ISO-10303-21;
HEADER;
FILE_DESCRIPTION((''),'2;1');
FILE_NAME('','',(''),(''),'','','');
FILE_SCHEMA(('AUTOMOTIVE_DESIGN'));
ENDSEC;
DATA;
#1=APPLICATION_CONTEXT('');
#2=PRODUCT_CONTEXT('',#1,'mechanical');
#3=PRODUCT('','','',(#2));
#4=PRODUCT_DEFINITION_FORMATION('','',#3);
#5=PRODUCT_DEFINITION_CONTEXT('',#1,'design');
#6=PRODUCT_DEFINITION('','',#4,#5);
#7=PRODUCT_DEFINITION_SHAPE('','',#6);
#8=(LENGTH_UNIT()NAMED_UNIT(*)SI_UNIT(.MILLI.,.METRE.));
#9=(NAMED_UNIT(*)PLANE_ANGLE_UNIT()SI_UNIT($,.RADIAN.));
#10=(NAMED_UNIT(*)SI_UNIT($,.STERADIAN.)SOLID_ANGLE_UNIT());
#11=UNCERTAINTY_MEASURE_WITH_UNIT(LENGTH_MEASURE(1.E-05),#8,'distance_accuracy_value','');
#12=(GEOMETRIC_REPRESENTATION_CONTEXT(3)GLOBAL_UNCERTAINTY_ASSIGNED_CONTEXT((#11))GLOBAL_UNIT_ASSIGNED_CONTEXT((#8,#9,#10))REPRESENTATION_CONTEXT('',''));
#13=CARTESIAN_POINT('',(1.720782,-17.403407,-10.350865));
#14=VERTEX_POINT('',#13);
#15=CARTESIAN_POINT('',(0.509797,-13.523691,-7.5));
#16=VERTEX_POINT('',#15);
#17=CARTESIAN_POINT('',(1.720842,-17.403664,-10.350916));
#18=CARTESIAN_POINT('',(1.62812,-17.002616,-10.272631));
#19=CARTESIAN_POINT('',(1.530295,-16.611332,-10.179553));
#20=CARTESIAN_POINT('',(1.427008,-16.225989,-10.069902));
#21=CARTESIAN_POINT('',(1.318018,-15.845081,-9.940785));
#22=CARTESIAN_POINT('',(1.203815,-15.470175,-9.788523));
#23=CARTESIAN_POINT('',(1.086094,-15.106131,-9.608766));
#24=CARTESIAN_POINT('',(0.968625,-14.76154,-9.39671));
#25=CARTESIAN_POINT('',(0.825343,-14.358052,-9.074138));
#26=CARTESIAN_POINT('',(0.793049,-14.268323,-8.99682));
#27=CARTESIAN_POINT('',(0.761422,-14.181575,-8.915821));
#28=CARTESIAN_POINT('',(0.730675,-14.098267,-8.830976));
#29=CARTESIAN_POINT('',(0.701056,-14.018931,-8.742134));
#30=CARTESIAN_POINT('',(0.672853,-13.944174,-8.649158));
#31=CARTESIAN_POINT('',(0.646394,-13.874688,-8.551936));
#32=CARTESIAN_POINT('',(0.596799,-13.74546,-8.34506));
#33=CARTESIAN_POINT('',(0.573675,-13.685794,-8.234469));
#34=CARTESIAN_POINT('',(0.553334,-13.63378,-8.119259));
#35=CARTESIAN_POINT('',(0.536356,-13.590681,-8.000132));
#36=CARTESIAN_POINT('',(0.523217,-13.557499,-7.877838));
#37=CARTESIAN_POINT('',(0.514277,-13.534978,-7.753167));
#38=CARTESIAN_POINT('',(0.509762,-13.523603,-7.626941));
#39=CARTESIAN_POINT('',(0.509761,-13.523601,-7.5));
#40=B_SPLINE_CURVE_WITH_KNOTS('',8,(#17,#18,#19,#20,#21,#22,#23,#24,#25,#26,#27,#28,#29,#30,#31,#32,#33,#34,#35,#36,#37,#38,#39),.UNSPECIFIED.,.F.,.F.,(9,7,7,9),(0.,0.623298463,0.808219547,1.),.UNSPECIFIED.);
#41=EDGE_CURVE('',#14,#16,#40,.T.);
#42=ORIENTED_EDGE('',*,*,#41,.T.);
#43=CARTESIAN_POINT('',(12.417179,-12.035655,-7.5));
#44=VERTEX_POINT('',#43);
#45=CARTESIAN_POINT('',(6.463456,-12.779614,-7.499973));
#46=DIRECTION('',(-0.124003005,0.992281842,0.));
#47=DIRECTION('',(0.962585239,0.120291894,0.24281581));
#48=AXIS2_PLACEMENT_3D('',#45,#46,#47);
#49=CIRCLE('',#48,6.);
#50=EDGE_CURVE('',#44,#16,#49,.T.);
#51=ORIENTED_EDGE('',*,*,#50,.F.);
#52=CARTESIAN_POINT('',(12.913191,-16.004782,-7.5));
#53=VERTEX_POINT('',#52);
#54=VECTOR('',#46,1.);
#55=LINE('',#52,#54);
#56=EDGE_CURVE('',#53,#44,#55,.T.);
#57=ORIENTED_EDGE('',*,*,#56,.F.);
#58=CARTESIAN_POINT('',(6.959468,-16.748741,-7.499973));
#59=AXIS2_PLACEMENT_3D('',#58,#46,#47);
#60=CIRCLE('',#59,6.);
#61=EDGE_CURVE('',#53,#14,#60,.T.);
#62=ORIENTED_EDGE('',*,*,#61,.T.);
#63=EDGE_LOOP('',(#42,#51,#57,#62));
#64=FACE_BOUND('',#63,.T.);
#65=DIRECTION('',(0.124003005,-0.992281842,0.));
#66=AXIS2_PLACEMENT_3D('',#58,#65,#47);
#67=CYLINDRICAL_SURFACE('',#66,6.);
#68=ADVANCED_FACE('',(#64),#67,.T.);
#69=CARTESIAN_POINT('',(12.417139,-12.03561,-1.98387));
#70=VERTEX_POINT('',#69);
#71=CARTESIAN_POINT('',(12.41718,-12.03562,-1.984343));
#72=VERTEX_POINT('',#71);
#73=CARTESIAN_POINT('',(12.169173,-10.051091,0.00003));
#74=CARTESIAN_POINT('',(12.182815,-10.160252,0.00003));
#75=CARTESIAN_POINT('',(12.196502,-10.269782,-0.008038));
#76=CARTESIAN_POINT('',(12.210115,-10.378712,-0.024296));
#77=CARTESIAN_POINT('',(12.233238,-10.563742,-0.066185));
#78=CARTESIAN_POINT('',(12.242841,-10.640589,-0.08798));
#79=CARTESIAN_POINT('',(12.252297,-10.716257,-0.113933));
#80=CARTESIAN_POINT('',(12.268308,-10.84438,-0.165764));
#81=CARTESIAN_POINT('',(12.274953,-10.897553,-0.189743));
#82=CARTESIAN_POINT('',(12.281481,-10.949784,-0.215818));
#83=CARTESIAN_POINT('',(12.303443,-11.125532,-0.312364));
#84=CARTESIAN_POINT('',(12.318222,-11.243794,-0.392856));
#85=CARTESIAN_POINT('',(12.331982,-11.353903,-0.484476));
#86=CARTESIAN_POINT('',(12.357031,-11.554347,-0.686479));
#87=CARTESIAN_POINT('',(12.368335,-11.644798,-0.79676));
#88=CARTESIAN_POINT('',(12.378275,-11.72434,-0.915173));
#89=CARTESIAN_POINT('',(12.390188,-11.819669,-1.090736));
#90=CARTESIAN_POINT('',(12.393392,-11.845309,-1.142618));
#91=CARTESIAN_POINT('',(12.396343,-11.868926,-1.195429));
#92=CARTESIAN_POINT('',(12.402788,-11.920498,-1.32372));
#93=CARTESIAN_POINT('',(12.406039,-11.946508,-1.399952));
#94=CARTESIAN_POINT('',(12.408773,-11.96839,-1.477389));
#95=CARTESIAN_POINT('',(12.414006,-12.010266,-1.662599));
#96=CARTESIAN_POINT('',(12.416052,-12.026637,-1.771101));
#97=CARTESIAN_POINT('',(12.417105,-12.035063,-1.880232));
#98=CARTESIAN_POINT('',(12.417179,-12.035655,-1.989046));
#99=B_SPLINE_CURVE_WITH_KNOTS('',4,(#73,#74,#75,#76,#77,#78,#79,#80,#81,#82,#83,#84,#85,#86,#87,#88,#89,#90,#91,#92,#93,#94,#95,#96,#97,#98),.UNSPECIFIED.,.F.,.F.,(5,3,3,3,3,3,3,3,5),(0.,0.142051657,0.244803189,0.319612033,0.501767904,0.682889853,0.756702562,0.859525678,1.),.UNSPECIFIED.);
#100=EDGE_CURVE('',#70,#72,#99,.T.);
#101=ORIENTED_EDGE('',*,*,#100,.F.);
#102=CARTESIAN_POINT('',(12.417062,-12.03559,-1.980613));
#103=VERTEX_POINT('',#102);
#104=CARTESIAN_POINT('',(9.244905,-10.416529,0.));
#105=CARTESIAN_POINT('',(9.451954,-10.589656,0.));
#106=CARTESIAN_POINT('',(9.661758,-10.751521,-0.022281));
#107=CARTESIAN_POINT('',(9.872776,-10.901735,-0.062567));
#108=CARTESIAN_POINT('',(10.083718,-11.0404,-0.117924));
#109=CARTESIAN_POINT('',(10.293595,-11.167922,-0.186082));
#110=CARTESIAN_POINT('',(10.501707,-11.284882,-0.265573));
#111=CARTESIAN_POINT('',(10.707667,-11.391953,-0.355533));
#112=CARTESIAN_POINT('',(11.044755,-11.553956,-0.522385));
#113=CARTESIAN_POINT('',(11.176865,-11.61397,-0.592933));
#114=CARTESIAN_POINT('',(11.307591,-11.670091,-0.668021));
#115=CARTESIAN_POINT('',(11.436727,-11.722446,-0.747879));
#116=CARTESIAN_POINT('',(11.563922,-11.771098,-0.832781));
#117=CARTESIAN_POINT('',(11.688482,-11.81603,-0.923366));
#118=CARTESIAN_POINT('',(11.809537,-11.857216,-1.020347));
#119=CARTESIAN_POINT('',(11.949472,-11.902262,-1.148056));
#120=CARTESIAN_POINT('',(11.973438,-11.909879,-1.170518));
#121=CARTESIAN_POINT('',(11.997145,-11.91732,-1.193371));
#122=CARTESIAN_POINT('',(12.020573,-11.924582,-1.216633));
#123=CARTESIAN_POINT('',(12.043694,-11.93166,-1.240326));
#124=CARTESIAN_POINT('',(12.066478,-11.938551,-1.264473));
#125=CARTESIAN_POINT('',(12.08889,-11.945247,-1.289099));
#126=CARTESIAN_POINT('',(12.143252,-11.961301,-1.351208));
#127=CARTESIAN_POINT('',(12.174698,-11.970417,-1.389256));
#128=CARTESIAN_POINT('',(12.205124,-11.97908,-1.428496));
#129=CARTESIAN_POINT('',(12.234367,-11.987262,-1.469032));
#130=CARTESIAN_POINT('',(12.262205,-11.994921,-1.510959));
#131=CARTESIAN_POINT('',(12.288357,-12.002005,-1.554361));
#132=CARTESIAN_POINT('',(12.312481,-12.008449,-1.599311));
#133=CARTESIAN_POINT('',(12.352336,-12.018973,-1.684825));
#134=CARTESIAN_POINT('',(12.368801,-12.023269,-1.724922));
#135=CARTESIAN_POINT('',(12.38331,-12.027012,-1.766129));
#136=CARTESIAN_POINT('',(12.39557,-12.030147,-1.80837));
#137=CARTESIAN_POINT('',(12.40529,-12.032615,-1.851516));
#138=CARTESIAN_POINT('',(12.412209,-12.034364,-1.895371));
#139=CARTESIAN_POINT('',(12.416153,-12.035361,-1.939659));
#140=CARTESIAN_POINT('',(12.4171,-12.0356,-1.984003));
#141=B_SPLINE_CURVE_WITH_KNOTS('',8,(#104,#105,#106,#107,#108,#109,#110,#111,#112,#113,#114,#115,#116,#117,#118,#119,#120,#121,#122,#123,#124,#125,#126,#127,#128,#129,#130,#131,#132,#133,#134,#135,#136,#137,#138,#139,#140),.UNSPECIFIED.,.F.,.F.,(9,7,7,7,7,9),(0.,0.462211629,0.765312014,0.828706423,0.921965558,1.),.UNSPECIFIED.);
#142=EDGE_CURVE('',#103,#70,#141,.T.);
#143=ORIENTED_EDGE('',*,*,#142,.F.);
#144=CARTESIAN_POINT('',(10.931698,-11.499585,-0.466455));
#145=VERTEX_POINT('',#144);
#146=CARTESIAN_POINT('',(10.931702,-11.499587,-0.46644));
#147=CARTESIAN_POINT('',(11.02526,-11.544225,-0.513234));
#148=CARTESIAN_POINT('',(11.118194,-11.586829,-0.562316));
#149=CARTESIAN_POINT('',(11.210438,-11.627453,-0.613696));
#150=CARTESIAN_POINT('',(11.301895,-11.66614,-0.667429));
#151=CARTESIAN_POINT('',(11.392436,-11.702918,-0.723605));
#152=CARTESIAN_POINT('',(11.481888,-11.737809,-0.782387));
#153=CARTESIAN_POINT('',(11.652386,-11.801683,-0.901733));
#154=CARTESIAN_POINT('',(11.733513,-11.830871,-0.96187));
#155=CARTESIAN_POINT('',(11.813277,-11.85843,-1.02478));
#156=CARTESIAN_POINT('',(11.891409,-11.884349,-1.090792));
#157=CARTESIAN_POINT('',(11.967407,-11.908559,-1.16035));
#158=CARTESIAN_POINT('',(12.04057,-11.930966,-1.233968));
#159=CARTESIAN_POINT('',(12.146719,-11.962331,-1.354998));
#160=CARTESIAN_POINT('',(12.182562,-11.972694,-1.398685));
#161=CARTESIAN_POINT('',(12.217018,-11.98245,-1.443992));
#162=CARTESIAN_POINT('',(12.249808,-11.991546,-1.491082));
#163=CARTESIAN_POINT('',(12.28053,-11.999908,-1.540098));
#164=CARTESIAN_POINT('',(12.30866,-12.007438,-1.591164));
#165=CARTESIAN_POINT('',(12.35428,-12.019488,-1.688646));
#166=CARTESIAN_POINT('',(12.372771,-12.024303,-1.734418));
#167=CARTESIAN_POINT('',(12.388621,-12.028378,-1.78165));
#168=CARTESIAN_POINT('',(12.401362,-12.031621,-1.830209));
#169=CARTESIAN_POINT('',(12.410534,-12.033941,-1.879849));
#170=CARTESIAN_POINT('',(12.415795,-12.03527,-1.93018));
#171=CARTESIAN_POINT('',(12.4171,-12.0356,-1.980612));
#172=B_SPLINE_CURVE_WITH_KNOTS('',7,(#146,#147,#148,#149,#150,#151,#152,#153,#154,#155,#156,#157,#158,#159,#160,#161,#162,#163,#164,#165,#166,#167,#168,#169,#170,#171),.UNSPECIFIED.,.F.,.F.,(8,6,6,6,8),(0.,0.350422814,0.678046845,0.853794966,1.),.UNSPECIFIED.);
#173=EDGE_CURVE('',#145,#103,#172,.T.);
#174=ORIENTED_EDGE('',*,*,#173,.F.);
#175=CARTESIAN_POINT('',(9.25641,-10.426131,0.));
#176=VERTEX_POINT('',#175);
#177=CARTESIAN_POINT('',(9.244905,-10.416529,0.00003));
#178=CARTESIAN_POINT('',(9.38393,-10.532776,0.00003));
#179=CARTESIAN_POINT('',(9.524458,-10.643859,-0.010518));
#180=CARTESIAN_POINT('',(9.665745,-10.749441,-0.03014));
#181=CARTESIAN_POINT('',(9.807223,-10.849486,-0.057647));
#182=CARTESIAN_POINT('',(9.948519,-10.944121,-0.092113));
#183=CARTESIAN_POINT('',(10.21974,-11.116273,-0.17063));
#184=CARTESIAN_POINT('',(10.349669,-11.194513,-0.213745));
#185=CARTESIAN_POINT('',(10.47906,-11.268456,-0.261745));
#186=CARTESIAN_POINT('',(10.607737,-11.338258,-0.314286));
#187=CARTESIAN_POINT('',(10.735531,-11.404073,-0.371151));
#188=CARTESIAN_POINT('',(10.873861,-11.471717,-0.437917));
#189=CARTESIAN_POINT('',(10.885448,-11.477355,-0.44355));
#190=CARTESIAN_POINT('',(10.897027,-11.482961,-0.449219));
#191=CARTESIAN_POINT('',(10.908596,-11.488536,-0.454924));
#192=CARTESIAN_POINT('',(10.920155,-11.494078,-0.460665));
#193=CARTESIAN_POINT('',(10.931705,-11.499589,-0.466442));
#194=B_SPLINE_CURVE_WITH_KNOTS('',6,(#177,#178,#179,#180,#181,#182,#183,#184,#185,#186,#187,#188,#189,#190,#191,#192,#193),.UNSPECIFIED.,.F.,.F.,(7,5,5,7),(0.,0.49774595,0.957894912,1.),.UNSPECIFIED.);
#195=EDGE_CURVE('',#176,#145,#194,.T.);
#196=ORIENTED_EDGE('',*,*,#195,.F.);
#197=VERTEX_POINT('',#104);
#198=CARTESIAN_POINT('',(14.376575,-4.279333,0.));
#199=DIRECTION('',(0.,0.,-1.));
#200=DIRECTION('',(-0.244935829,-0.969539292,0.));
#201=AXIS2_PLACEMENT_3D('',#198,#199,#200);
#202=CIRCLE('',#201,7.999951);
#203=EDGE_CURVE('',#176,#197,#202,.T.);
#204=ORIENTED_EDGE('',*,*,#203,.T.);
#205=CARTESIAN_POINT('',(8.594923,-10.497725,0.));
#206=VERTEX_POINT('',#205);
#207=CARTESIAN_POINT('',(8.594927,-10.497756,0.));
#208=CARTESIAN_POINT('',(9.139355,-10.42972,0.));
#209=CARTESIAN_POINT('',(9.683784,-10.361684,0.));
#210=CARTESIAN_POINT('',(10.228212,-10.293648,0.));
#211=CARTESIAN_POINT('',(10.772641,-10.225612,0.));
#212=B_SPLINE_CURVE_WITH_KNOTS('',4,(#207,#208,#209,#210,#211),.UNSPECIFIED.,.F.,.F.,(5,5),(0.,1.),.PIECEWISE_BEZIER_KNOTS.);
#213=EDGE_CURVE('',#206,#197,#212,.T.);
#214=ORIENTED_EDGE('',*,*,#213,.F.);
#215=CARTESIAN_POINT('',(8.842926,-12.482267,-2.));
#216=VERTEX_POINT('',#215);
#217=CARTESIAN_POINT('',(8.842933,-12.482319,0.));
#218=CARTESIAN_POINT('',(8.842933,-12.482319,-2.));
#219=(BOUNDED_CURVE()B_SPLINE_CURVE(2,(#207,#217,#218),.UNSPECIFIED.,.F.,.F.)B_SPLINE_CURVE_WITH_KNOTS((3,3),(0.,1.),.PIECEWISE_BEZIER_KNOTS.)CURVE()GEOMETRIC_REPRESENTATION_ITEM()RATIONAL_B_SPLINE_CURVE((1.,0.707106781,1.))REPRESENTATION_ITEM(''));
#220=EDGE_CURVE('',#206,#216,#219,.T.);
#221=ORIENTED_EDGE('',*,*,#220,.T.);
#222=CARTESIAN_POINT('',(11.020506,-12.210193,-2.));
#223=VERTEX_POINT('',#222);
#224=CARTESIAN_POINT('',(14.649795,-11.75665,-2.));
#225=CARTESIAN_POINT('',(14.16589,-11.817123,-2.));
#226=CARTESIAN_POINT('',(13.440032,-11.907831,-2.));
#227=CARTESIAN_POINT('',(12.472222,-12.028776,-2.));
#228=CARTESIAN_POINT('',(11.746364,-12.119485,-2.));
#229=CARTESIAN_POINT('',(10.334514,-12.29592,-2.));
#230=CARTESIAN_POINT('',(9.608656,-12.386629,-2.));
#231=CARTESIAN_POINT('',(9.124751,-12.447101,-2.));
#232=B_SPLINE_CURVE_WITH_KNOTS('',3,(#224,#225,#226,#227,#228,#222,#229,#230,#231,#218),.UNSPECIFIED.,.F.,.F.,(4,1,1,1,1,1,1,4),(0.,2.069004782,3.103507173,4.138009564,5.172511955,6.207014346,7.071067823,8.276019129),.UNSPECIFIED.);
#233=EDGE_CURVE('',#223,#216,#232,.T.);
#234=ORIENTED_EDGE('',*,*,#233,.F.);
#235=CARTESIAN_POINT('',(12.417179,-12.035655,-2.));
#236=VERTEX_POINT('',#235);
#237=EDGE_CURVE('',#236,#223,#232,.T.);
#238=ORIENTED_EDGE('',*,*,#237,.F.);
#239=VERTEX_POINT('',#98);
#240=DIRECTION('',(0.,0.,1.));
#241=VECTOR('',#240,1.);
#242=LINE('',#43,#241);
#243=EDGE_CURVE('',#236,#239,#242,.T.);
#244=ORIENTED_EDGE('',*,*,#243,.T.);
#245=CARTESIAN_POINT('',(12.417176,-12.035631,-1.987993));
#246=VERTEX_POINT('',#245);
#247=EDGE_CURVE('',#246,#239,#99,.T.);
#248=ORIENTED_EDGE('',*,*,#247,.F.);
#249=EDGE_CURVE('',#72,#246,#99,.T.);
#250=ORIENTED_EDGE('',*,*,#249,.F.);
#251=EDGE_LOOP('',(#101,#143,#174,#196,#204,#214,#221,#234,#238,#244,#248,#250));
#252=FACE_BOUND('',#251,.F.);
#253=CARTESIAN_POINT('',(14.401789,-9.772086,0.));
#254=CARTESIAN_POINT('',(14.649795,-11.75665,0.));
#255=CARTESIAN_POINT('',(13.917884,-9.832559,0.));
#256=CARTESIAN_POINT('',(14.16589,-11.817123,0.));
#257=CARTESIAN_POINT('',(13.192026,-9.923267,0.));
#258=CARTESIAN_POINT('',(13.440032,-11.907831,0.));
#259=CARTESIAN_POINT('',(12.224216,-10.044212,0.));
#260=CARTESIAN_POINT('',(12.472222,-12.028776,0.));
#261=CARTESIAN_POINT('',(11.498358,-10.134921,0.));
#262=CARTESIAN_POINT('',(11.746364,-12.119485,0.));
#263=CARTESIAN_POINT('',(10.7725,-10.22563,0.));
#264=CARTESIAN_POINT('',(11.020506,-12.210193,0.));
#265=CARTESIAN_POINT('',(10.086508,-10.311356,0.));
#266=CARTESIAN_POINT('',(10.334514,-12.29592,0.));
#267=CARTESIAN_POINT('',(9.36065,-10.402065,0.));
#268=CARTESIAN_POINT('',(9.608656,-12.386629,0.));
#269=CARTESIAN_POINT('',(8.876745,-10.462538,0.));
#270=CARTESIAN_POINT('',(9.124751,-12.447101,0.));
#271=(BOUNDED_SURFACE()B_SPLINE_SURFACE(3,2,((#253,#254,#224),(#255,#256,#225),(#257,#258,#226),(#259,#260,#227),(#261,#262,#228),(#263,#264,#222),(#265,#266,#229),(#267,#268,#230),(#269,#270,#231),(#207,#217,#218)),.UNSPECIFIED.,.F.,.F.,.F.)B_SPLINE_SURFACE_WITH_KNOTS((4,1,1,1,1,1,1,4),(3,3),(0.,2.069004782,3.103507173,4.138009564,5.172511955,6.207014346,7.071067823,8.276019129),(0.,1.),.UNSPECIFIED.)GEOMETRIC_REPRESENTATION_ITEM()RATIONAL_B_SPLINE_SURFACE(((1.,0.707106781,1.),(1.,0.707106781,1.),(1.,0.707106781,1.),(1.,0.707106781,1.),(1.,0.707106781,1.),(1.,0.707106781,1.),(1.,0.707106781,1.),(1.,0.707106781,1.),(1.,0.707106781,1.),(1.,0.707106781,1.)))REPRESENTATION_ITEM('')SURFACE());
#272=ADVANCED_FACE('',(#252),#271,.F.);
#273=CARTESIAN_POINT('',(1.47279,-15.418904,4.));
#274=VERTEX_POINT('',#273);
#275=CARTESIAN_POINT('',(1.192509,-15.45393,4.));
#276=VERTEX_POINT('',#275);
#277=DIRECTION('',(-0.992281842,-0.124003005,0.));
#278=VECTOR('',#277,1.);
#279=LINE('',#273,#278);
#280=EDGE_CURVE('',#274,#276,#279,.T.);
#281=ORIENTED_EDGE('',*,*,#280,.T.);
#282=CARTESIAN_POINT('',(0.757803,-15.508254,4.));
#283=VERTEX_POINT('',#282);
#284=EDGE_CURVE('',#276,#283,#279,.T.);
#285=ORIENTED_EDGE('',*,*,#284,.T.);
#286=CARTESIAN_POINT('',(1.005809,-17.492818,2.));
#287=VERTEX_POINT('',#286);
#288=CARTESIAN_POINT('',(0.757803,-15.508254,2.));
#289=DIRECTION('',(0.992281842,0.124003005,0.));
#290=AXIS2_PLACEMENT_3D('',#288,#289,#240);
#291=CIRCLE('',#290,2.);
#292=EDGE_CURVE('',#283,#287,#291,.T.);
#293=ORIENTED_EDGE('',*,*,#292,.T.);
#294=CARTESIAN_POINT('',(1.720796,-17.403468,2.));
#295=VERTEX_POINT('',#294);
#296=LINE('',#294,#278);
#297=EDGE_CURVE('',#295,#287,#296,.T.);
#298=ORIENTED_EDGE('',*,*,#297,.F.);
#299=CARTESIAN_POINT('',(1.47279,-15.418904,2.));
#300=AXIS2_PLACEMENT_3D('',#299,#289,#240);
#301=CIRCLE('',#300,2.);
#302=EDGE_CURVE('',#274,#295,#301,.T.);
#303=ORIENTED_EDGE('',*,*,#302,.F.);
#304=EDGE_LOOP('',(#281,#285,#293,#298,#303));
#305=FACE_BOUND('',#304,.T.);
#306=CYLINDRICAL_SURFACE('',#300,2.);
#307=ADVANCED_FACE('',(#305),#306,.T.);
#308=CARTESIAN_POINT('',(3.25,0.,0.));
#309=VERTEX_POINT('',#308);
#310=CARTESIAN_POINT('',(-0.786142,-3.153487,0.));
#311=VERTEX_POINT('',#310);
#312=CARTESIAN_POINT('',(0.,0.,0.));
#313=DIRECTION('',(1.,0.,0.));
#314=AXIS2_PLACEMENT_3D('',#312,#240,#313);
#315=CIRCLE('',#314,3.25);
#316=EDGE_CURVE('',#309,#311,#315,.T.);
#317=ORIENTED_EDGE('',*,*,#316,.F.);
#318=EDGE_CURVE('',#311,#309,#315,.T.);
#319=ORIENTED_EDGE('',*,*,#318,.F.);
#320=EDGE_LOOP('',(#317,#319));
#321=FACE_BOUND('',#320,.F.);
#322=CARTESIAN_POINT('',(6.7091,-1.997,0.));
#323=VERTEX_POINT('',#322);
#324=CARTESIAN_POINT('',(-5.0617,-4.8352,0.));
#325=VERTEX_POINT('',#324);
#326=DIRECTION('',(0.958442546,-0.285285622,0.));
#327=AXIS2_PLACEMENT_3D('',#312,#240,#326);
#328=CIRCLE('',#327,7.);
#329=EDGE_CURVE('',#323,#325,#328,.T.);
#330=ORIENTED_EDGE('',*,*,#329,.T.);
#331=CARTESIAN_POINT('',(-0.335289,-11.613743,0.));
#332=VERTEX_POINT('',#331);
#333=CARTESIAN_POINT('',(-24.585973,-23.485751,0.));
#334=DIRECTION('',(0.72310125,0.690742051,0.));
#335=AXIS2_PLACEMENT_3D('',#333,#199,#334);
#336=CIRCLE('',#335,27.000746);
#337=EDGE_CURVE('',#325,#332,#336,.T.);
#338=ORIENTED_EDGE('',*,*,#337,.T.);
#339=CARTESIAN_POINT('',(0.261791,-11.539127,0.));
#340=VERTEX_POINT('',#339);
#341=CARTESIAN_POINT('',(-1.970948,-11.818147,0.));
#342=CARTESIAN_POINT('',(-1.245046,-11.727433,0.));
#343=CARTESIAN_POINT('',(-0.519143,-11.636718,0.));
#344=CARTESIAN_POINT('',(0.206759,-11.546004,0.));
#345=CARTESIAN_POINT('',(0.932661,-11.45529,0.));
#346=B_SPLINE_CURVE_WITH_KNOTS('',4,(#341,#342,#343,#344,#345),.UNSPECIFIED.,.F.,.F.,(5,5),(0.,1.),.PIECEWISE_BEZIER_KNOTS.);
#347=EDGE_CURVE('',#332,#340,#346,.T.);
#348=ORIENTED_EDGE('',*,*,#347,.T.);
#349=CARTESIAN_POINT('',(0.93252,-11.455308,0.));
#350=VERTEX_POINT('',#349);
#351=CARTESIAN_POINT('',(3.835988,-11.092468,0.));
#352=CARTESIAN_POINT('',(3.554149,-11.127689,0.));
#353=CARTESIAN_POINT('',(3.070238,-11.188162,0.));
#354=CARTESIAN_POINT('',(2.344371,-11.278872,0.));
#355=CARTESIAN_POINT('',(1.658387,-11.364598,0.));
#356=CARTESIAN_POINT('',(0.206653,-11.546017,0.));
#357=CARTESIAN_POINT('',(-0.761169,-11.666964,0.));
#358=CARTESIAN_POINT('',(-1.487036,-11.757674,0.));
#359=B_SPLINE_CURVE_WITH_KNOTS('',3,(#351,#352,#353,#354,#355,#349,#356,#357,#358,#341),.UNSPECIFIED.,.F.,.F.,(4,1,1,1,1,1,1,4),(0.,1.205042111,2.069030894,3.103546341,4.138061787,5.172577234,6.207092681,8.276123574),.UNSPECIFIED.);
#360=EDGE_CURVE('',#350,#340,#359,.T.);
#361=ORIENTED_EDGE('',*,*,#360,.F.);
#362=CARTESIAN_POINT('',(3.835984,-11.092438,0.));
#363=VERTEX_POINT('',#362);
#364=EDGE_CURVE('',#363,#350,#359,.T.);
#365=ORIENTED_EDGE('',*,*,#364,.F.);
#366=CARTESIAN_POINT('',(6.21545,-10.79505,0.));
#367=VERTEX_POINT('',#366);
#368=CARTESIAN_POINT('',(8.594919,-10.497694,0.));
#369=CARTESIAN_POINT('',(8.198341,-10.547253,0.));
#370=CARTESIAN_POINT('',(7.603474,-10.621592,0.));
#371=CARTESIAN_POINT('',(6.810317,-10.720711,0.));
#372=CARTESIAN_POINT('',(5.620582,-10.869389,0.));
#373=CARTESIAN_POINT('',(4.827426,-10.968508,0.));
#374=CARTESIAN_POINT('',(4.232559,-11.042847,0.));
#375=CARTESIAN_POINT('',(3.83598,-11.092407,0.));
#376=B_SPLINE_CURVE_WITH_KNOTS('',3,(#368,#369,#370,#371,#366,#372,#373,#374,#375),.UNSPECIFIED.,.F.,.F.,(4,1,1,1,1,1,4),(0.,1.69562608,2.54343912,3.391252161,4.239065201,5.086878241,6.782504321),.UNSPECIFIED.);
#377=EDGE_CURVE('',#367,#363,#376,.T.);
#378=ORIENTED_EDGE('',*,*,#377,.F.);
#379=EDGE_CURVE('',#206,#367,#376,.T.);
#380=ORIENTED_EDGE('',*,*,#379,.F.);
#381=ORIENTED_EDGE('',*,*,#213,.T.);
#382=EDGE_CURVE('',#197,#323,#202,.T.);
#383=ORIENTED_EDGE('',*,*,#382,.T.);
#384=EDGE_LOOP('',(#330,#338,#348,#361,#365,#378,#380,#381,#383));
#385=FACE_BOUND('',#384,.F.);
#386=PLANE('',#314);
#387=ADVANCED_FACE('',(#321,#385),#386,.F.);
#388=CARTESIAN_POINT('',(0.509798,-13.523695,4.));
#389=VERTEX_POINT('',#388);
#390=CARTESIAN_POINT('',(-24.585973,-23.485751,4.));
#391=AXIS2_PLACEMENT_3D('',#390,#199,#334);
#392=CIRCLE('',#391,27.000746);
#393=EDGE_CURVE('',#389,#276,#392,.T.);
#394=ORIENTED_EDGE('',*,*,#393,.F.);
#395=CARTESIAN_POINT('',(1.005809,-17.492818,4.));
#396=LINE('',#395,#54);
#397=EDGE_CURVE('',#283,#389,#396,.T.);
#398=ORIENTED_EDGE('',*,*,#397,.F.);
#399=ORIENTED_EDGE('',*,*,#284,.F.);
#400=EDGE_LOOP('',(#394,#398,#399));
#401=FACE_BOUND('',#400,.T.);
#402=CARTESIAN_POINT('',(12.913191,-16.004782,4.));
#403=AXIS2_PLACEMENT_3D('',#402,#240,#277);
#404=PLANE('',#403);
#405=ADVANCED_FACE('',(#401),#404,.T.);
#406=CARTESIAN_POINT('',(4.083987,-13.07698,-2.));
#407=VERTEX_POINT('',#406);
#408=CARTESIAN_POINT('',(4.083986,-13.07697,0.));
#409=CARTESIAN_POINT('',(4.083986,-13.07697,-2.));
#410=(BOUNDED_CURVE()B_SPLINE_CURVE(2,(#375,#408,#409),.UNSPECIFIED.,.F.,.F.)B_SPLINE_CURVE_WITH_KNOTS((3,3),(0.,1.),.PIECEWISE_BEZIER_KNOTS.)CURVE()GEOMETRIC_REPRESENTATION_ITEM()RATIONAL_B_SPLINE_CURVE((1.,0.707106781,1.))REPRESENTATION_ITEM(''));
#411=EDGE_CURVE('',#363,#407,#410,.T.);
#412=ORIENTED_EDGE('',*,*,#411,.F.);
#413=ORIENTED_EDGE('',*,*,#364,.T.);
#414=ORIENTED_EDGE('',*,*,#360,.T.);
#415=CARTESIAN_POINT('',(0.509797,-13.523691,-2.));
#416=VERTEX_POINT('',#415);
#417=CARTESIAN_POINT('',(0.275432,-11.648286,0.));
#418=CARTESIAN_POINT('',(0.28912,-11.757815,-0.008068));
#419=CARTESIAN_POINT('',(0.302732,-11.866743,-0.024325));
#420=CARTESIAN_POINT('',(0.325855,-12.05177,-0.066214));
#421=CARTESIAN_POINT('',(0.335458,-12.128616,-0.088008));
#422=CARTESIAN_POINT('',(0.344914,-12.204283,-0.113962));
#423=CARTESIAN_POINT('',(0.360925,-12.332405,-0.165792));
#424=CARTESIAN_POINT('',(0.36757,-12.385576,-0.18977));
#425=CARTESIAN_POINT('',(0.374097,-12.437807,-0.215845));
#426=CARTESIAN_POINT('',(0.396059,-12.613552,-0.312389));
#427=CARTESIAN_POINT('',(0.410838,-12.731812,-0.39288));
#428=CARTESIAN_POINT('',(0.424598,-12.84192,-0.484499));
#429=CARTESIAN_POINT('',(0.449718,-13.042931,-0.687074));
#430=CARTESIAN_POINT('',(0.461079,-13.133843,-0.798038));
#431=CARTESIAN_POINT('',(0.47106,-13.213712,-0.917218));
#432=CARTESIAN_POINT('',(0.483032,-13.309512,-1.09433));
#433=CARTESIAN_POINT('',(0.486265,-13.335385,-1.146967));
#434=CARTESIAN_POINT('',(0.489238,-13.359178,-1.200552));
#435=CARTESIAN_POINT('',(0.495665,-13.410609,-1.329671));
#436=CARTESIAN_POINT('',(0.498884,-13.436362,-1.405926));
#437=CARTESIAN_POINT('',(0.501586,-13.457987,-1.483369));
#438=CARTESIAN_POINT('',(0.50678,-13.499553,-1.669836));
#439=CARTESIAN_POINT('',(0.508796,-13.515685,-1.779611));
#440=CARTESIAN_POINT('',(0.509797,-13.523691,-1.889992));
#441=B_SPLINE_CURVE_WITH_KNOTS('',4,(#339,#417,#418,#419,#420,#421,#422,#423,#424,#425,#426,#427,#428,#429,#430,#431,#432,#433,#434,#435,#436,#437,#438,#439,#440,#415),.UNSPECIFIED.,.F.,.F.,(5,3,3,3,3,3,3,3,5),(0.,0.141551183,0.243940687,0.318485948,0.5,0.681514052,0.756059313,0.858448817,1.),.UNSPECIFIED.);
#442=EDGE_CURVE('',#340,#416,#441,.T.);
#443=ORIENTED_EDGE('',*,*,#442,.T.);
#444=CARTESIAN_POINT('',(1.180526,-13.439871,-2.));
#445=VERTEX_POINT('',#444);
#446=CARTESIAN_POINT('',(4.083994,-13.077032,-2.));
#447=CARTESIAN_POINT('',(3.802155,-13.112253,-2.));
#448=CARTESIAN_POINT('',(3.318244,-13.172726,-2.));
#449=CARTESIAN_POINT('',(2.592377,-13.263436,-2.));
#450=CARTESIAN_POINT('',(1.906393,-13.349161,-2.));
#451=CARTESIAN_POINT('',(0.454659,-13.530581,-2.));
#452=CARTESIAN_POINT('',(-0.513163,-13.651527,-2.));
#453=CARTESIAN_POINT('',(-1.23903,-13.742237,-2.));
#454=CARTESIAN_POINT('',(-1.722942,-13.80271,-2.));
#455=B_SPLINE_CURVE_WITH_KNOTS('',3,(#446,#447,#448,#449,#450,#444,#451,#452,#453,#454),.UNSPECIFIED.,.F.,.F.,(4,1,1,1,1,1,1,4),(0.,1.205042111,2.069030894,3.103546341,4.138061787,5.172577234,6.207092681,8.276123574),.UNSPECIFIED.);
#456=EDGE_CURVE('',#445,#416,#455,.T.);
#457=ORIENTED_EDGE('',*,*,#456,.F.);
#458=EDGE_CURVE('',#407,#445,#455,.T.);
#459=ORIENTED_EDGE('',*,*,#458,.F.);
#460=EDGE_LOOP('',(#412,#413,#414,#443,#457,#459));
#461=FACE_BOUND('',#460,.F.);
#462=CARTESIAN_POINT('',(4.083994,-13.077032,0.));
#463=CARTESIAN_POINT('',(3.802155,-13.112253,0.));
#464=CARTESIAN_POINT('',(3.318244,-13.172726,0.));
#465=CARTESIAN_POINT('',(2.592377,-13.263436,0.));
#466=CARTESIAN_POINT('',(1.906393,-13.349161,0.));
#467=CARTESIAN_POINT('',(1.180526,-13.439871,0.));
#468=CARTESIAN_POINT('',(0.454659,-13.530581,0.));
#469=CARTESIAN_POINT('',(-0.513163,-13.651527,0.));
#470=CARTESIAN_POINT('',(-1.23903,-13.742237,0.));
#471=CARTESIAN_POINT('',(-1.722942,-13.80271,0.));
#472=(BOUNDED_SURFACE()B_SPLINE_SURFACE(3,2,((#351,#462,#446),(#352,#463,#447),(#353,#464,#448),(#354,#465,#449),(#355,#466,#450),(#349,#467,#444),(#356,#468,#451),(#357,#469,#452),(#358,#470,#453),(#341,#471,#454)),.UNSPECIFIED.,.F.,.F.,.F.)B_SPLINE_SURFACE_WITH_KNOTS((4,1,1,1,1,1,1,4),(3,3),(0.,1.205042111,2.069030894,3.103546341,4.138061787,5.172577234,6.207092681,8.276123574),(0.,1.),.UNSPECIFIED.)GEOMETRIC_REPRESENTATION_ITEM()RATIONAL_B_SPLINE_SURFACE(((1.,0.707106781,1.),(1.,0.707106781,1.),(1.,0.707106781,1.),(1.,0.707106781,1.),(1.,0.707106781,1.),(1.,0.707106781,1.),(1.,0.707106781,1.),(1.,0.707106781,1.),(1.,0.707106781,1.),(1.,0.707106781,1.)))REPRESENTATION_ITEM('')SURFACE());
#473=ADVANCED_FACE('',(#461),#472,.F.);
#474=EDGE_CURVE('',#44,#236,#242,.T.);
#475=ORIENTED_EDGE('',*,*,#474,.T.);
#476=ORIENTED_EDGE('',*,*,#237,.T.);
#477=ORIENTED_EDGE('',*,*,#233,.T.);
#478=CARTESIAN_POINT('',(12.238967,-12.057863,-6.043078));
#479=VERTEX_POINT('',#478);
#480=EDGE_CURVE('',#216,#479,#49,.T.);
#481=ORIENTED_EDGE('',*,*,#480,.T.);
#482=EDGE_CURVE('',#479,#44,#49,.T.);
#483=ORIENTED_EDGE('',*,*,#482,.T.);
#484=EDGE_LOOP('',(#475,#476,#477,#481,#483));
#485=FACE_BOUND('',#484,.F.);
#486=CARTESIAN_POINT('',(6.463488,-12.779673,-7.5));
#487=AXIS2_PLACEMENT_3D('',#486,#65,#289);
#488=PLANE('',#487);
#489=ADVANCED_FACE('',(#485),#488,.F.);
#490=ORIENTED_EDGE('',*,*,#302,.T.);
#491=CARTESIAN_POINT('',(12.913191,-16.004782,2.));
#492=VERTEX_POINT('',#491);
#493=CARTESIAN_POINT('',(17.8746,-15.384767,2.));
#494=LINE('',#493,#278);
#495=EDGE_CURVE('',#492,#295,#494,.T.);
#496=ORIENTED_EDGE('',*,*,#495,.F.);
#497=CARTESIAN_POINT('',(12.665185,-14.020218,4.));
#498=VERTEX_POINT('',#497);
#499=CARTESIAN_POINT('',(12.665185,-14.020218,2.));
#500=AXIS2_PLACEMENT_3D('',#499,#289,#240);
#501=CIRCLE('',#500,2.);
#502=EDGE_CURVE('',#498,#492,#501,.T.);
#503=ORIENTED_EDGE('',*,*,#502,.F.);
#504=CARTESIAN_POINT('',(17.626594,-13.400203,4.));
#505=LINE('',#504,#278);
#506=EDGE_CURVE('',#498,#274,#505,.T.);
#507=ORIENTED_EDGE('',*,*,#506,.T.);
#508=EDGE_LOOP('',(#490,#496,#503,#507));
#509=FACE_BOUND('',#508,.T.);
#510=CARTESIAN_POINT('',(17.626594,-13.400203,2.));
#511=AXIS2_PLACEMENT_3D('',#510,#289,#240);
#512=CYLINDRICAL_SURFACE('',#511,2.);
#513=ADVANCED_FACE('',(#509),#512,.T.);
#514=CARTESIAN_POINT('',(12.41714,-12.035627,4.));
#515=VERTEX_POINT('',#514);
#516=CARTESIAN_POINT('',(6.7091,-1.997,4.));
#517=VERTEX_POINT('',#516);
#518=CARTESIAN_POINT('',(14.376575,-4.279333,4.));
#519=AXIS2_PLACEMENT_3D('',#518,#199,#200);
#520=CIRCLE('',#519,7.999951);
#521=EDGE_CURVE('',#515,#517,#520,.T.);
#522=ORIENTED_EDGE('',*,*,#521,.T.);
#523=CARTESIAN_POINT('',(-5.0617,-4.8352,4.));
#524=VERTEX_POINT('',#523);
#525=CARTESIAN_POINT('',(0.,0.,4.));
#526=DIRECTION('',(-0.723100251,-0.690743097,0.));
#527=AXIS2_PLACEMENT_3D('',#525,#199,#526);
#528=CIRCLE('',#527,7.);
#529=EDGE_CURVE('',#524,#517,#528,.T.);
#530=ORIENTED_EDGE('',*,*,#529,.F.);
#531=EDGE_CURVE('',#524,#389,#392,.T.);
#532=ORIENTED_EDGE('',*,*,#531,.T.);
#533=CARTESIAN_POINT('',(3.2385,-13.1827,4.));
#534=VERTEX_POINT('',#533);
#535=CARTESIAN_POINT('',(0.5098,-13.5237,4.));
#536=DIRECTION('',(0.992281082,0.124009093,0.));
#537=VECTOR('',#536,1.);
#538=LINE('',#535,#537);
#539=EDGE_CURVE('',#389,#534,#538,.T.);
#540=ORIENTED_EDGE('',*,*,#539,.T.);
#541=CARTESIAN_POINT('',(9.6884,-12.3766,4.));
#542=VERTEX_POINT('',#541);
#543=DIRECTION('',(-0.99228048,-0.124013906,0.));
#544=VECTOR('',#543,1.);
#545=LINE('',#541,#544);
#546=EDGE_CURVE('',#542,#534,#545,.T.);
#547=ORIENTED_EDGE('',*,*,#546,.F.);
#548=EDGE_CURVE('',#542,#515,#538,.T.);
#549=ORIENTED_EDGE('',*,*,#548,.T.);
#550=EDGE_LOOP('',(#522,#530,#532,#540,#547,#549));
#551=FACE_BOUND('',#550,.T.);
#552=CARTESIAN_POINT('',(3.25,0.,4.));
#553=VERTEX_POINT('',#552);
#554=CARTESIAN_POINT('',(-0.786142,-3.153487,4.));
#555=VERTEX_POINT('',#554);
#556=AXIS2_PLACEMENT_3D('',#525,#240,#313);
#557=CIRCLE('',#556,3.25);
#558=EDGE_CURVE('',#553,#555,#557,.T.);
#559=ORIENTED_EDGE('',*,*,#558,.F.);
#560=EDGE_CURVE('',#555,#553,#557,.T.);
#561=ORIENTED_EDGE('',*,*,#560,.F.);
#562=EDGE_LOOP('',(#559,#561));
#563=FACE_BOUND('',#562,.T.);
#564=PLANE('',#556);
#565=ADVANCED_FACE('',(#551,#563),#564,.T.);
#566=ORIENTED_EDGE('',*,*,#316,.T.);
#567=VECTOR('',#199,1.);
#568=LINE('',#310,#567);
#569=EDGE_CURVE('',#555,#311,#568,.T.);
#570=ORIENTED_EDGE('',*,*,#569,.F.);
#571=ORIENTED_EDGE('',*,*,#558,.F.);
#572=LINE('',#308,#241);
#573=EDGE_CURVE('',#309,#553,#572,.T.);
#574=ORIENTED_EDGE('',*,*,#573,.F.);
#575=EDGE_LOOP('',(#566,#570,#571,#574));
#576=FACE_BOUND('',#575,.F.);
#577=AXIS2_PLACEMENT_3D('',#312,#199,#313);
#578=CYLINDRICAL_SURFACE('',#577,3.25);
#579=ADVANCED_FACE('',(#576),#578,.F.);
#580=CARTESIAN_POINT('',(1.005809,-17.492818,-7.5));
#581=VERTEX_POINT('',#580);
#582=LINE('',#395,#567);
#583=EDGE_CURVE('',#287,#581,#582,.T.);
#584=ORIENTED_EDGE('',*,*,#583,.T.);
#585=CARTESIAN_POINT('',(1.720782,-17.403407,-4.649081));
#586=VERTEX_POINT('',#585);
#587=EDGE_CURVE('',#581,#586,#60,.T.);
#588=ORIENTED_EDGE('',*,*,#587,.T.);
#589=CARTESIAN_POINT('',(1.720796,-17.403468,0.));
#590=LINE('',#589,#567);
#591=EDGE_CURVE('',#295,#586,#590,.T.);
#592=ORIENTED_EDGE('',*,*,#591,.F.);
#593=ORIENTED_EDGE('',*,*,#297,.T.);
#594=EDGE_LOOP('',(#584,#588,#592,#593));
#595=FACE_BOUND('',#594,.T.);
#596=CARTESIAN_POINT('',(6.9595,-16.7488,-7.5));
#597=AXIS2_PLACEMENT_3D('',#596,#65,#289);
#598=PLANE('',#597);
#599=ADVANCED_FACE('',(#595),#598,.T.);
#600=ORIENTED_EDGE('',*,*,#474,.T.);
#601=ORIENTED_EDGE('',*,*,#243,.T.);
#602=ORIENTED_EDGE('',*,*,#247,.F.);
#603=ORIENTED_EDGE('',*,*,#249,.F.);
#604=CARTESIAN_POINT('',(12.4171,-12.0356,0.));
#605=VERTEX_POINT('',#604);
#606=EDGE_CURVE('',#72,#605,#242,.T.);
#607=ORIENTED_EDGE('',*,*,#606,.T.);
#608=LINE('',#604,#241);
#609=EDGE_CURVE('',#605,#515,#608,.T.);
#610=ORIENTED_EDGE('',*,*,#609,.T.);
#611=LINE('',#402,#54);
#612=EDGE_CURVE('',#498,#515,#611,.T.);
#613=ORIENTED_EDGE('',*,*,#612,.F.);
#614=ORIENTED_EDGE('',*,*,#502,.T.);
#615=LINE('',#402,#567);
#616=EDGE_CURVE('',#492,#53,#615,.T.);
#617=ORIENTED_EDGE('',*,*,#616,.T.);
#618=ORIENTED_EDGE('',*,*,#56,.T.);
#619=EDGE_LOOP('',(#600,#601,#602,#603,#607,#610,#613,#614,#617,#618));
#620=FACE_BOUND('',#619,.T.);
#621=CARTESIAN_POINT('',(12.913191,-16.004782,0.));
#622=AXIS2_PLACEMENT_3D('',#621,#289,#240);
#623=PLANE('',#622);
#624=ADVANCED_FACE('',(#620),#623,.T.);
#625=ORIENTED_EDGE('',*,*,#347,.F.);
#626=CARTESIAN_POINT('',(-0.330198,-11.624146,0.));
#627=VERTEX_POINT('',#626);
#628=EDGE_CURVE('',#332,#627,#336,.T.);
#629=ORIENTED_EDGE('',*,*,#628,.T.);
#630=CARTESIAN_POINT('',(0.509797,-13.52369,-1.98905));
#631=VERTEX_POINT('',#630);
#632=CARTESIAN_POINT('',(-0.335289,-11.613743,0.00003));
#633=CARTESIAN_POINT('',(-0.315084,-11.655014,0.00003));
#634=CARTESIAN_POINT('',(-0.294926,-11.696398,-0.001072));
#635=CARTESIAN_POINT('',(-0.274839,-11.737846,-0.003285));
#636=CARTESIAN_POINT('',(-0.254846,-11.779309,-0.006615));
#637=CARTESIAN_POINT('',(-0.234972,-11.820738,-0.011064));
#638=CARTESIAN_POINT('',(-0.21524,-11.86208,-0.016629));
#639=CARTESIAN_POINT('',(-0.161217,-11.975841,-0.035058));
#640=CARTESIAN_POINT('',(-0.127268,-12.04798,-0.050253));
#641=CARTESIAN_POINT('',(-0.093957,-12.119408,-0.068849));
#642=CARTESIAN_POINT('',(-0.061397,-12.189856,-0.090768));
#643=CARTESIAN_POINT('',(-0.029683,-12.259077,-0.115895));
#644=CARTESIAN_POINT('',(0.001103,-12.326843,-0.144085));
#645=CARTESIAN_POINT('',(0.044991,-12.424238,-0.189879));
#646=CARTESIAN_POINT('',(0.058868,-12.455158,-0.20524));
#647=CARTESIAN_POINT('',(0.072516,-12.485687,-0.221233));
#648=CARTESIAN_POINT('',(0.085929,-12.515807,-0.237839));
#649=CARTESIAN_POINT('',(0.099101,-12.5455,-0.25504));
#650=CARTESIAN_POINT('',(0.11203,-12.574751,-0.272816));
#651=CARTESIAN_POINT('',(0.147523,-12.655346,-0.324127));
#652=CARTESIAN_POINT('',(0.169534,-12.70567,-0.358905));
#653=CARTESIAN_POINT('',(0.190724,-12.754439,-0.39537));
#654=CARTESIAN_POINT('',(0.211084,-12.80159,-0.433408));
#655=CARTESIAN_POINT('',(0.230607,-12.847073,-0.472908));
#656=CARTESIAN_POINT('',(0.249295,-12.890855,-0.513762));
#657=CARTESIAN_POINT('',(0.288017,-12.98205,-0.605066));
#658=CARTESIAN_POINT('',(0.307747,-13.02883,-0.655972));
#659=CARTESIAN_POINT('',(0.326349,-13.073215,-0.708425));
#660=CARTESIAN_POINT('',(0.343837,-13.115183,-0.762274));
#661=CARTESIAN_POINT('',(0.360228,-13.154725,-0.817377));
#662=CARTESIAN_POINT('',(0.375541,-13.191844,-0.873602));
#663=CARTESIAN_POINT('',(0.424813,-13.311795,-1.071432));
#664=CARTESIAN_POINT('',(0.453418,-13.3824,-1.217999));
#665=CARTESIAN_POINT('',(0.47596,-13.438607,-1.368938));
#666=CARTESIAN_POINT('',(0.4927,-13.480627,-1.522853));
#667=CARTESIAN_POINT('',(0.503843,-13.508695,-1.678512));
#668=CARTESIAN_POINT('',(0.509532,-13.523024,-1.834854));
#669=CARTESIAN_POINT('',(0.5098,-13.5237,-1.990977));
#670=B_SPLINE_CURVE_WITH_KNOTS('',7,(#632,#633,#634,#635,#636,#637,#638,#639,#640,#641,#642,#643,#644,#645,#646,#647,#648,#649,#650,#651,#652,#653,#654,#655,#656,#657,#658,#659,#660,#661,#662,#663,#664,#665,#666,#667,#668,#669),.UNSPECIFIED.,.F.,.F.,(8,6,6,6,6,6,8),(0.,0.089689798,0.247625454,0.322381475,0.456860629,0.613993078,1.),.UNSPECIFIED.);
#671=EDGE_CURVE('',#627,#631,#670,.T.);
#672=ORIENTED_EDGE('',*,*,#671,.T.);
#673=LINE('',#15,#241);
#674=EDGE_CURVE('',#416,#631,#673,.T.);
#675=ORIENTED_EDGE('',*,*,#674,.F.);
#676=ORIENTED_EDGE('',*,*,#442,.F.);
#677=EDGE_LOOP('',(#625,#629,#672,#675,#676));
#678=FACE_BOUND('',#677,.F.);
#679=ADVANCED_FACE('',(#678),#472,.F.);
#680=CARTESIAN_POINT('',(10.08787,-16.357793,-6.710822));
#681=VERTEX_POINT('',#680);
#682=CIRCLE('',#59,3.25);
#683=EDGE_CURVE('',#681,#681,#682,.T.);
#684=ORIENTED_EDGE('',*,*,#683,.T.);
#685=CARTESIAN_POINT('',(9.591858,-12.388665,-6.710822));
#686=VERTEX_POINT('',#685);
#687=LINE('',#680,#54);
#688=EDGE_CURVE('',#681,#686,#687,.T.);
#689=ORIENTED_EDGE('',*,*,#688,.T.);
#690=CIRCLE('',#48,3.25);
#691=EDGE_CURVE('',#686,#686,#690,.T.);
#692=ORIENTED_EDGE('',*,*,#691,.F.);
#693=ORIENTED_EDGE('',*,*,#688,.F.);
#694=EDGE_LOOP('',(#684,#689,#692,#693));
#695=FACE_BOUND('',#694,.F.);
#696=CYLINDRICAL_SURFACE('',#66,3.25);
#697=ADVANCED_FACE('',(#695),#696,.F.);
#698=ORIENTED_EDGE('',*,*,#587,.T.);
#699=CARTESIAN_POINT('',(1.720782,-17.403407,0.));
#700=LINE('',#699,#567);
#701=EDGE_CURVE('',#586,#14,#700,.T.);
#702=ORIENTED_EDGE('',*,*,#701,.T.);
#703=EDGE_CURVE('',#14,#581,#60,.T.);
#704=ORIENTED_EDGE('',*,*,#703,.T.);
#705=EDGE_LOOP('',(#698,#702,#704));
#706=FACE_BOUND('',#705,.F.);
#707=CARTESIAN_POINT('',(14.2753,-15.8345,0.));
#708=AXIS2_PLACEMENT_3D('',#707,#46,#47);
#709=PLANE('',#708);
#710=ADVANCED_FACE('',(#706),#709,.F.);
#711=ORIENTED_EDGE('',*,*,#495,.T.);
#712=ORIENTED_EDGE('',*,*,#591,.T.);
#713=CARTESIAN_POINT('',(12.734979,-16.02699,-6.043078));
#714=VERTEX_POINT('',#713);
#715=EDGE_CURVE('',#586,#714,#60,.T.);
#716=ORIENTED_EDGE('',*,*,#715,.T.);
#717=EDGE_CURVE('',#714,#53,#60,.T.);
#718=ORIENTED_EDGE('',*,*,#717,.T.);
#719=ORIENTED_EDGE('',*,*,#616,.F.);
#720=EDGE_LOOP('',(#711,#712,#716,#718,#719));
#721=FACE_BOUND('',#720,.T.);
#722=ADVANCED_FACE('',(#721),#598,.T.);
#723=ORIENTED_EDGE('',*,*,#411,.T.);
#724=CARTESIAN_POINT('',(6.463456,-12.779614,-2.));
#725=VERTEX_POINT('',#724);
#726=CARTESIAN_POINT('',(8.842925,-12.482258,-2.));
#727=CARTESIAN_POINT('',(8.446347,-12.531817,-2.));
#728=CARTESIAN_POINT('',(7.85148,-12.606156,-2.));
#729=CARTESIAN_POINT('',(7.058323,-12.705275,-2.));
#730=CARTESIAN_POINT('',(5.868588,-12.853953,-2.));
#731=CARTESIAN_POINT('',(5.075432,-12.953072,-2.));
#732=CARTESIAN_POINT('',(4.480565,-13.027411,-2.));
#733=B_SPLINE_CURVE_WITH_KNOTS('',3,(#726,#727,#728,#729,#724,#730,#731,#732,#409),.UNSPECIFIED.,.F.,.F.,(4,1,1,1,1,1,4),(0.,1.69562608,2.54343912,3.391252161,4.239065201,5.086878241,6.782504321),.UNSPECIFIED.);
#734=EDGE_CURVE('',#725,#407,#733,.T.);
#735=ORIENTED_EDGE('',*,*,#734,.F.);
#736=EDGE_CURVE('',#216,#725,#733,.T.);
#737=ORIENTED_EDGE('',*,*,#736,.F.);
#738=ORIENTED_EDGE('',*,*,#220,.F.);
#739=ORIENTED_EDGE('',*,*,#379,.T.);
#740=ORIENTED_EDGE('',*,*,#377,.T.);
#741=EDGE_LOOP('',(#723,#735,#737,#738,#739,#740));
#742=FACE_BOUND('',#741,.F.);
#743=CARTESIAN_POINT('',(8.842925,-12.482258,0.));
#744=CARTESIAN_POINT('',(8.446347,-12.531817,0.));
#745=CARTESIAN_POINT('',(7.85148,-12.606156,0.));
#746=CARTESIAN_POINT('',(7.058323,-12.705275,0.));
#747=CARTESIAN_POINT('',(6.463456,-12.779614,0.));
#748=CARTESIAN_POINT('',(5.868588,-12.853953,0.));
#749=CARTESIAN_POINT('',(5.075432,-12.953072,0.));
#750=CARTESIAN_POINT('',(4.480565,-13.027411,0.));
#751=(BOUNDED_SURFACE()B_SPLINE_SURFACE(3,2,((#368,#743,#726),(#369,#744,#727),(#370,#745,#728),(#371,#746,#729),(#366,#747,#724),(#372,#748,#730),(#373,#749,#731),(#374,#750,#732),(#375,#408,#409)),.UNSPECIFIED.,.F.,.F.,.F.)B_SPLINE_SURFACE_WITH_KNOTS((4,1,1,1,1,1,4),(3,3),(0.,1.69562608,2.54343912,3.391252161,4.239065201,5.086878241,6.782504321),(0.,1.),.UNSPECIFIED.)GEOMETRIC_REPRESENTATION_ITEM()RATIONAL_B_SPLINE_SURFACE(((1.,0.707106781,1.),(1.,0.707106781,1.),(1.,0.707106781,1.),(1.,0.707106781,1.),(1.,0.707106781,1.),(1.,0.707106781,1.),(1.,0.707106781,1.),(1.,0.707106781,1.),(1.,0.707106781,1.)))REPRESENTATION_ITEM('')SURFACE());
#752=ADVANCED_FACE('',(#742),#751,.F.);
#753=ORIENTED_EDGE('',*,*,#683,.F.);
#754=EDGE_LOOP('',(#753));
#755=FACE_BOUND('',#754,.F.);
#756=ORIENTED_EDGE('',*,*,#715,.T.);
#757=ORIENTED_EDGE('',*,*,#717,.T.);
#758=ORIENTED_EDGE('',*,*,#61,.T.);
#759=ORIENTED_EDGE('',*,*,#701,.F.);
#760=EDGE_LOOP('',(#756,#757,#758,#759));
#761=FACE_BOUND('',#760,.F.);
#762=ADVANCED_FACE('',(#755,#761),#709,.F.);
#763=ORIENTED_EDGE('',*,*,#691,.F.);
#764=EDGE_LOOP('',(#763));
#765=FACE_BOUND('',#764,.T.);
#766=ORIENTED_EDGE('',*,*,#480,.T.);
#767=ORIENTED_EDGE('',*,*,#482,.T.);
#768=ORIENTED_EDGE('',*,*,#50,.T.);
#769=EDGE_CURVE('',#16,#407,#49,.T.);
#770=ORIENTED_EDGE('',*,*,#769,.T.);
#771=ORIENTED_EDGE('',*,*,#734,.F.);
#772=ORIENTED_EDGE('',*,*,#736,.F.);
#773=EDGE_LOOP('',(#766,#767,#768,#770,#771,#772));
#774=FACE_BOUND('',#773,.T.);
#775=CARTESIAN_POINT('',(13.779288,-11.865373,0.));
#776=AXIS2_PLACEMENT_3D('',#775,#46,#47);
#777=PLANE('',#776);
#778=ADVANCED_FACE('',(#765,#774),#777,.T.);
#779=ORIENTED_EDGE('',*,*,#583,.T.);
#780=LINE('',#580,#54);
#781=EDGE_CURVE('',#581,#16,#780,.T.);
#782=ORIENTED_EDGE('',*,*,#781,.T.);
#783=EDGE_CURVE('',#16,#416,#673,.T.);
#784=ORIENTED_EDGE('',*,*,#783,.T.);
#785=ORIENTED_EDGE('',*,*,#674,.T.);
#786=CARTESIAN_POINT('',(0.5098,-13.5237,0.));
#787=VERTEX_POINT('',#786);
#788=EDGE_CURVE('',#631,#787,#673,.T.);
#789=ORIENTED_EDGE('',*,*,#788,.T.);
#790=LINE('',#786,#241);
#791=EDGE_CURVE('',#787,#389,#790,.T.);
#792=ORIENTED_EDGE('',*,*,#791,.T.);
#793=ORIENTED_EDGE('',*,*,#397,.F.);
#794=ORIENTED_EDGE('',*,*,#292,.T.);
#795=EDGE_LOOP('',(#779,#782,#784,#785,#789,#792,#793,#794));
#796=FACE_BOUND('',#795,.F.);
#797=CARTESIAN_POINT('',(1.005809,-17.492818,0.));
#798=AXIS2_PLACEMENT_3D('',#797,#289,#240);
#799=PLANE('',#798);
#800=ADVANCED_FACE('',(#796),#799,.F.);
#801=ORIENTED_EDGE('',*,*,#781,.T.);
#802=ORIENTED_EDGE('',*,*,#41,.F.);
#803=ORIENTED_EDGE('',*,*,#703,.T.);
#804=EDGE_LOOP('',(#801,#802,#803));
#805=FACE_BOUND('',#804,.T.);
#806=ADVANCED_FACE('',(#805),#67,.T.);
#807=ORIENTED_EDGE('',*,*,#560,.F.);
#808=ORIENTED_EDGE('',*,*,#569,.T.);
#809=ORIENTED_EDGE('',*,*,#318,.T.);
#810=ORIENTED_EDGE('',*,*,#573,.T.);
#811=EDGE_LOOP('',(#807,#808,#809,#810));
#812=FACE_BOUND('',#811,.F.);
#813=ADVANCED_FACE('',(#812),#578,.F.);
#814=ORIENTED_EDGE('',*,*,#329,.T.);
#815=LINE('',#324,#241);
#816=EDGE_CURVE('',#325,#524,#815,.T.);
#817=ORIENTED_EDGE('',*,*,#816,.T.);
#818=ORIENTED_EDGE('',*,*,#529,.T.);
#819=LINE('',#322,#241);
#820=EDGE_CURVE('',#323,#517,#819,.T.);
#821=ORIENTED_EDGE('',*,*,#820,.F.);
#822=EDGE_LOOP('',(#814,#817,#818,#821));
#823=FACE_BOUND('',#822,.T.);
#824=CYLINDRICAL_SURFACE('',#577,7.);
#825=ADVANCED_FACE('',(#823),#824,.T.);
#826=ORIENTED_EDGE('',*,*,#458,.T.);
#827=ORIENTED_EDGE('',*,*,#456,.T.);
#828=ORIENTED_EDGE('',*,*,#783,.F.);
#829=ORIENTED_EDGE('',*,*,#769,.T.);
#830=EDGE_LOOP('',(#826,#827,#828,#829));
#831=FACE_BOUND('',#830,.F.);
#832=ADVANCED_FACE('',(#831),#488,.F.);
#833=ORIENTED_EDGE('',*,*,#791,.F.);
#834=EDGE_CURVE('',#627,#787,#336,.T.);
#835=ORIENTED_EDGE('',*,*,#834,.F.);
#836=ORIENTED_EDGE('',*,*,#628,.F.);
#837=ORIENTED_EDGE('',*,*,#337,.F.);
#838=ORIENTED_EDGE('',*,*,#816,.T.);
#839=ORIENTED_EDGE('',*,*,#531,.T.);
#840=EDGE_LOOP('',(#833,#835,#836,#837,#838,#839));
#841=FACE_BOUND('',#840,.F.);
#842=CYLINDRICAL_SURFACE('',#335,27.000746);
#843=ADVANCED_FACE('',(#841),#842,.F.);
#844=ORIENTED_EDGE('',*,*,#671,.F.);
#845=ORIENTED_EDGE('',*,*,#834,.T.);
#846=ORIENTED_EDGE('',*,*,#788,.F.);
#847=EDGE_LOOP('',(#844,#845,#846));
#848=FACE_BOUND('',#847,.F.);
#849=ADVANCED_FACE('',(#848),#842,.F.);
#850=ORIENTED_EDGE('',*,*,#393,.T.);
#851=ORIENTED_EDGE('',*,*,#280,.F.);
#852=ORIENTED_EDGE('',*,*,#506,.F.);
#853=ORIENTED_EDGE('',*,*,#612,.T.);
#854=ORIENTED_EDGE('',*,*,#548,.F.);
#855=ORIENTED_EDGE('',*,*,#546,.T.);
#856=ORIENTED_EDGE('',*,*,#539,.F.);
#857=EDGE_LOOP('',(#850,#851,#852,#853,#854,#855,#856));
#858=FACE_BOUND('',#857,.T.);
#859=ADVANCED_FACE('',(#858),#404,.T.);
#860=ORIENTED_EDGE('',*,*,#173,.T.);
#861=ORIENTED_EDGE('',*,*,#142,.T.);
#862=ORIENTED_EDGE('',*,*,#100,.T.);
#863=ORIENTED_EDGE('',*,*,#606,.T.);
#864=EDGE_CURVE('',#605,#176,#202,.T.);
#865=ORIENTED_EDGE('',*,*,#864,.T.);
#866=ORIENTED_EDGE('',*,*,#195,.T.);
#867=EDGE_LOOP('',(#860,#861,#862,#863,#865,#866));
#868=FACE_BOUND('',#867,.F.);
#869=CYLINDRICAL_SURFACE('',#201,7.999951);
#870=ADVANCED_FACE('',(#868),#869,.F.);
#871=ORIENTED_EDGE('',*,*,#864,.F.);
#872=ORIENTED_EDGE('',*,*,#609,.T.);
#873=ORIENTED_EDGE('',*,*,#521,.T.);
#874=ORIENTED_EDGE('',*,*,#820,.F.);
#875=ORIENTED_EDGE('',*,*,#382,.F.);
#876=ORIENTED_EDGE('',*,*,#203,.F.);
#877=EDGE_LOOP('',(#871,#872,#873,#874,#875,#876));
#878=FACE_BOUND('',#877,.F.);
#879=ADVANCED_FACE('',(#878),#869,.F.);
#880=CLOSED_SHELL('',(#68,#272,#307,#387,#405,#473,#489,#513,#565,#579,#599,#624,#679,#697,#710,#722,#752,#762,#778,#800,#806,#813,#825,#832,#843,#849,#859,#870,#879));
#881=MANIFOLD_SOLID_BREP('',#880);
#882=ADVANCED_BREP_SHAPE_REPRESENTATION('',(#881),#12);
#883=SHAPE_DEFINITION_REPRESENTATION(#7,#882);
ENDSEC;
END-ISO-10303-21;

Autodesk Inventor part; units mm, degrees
ref_plane "YZ Plane" through (0, 0, 0) normal (1, 0, 0) x (0, 1, 0)
sketch "Base" plane through (0, 0, 0) normal (0, 0, 1) x (1, 0, 0)
  circle A0 centre (0, 0) radius 3.25
  circle A1 centre (0, 0) radius 7
  dimension "d0" = 6.5
  dimension "d1" = 14
extrude "BaseFeature" add sketch "Base" along normal blind 4
ref_plane "LinkPlane" through (14.2753, -15.8345, 0) normal (-0.124003, 0.9922818, 0) x (0.9625852, 0.1202919, 0.2428158)
sketch "LinkEnd" plane through (14.2753, -15.8345, 0) normal (-0.124003, 0.9922818, 0) x (0.9625852, 0.1202919, 0.2428158)
  line L0 (-6.4275, 8.6997) -> (-5.2135, 3.8493) construction
  line L1 (-8.3662, 3.0601) -> (-9.5803, 7.9105) construction
  line L2 (-8.3662, 3.0601) -> (-5.2135, 3.8493) construction
  circle A0 centre (-8.9732, 5.4853) radius 3.25
  circle A1 centre (-8.9732, 5.4853) radius 6
  dimension "d21" = 5
  dimension "d23" = 3.25
  dimension "d24" = 5
  dimension "d25" = 6.5
  dimension "d26" = 12
extrude "LinkEndFeature" add sketch "LinkEnd" along normal blind 4
ref_plane "LowerMountPlane" through (0, 0, 0) normal (0, 0, -1) x (-1, 0, 0)
sketch "LowerMount" plane through (0, 0, 0) normal (0, 0, -1) x (-1, 0, 0)
  line L0 (-9.6884, -12.3766) -> (-3.2385, -13.1827) projected
  line L1 (-0.5098, -13.5237) -> (-12.4171, -12.0356) projected
  circle A0 centre (0, 0) radius 7 projected
  arc A1 (5.0617, -4.8352) -> (-0.5098, -13.5237) centre (24.5854, -23.4853) ccw
  arc A2 (-12.4171, -12.0356) -> (-6.7091, -1.997) centre (-14.3766, -4.2793) ccw
  arc A3 (-6.7091, -1.997) -> (5.0617, -4.8352) centre (0, 0) ccw
  dimension "d27" = 8
  dimension "d28" = 27
extrude "LowerMountFeature" add sketch "LowerMount" against normal up to surface (4 mm away) contours L1 A2 A0 A1 L0
sketch "Link" plane through (6.9595, -16.7488, -7.5) normal (0.124003, -0.9922818, 0) x (0.9922818, 0.124003, 0)
  line L0 (6, 11.5) -> (-6, 11.5) projected
  line L1 (-6, 7.5) -> (-6, 11.5) projected
  line L2 (6, 7.5) -> (-6, 7.5) projected
  line L3 (6, 7.5) -> (6, 11.5) projected
  circle A0 centre (0, 0) radius 6 projected
  line L4 (6, 7.5) -> (6, 0)
  line L5 (-6, 0) -> (-6, 7.5)
extrude "LinkFeature" add sketch "Link" against normal up to surface (4 mm away) contours L3 L2 L1 L0 | L4 A0 L5 L2
fillet "LinkFilletsFeature" radius 2 2 edges at (6.4635, -12.7797, 0) (6.9595, -16.7488, 4)
properties part number "ElbowConnectorUnderlinkLeft"
